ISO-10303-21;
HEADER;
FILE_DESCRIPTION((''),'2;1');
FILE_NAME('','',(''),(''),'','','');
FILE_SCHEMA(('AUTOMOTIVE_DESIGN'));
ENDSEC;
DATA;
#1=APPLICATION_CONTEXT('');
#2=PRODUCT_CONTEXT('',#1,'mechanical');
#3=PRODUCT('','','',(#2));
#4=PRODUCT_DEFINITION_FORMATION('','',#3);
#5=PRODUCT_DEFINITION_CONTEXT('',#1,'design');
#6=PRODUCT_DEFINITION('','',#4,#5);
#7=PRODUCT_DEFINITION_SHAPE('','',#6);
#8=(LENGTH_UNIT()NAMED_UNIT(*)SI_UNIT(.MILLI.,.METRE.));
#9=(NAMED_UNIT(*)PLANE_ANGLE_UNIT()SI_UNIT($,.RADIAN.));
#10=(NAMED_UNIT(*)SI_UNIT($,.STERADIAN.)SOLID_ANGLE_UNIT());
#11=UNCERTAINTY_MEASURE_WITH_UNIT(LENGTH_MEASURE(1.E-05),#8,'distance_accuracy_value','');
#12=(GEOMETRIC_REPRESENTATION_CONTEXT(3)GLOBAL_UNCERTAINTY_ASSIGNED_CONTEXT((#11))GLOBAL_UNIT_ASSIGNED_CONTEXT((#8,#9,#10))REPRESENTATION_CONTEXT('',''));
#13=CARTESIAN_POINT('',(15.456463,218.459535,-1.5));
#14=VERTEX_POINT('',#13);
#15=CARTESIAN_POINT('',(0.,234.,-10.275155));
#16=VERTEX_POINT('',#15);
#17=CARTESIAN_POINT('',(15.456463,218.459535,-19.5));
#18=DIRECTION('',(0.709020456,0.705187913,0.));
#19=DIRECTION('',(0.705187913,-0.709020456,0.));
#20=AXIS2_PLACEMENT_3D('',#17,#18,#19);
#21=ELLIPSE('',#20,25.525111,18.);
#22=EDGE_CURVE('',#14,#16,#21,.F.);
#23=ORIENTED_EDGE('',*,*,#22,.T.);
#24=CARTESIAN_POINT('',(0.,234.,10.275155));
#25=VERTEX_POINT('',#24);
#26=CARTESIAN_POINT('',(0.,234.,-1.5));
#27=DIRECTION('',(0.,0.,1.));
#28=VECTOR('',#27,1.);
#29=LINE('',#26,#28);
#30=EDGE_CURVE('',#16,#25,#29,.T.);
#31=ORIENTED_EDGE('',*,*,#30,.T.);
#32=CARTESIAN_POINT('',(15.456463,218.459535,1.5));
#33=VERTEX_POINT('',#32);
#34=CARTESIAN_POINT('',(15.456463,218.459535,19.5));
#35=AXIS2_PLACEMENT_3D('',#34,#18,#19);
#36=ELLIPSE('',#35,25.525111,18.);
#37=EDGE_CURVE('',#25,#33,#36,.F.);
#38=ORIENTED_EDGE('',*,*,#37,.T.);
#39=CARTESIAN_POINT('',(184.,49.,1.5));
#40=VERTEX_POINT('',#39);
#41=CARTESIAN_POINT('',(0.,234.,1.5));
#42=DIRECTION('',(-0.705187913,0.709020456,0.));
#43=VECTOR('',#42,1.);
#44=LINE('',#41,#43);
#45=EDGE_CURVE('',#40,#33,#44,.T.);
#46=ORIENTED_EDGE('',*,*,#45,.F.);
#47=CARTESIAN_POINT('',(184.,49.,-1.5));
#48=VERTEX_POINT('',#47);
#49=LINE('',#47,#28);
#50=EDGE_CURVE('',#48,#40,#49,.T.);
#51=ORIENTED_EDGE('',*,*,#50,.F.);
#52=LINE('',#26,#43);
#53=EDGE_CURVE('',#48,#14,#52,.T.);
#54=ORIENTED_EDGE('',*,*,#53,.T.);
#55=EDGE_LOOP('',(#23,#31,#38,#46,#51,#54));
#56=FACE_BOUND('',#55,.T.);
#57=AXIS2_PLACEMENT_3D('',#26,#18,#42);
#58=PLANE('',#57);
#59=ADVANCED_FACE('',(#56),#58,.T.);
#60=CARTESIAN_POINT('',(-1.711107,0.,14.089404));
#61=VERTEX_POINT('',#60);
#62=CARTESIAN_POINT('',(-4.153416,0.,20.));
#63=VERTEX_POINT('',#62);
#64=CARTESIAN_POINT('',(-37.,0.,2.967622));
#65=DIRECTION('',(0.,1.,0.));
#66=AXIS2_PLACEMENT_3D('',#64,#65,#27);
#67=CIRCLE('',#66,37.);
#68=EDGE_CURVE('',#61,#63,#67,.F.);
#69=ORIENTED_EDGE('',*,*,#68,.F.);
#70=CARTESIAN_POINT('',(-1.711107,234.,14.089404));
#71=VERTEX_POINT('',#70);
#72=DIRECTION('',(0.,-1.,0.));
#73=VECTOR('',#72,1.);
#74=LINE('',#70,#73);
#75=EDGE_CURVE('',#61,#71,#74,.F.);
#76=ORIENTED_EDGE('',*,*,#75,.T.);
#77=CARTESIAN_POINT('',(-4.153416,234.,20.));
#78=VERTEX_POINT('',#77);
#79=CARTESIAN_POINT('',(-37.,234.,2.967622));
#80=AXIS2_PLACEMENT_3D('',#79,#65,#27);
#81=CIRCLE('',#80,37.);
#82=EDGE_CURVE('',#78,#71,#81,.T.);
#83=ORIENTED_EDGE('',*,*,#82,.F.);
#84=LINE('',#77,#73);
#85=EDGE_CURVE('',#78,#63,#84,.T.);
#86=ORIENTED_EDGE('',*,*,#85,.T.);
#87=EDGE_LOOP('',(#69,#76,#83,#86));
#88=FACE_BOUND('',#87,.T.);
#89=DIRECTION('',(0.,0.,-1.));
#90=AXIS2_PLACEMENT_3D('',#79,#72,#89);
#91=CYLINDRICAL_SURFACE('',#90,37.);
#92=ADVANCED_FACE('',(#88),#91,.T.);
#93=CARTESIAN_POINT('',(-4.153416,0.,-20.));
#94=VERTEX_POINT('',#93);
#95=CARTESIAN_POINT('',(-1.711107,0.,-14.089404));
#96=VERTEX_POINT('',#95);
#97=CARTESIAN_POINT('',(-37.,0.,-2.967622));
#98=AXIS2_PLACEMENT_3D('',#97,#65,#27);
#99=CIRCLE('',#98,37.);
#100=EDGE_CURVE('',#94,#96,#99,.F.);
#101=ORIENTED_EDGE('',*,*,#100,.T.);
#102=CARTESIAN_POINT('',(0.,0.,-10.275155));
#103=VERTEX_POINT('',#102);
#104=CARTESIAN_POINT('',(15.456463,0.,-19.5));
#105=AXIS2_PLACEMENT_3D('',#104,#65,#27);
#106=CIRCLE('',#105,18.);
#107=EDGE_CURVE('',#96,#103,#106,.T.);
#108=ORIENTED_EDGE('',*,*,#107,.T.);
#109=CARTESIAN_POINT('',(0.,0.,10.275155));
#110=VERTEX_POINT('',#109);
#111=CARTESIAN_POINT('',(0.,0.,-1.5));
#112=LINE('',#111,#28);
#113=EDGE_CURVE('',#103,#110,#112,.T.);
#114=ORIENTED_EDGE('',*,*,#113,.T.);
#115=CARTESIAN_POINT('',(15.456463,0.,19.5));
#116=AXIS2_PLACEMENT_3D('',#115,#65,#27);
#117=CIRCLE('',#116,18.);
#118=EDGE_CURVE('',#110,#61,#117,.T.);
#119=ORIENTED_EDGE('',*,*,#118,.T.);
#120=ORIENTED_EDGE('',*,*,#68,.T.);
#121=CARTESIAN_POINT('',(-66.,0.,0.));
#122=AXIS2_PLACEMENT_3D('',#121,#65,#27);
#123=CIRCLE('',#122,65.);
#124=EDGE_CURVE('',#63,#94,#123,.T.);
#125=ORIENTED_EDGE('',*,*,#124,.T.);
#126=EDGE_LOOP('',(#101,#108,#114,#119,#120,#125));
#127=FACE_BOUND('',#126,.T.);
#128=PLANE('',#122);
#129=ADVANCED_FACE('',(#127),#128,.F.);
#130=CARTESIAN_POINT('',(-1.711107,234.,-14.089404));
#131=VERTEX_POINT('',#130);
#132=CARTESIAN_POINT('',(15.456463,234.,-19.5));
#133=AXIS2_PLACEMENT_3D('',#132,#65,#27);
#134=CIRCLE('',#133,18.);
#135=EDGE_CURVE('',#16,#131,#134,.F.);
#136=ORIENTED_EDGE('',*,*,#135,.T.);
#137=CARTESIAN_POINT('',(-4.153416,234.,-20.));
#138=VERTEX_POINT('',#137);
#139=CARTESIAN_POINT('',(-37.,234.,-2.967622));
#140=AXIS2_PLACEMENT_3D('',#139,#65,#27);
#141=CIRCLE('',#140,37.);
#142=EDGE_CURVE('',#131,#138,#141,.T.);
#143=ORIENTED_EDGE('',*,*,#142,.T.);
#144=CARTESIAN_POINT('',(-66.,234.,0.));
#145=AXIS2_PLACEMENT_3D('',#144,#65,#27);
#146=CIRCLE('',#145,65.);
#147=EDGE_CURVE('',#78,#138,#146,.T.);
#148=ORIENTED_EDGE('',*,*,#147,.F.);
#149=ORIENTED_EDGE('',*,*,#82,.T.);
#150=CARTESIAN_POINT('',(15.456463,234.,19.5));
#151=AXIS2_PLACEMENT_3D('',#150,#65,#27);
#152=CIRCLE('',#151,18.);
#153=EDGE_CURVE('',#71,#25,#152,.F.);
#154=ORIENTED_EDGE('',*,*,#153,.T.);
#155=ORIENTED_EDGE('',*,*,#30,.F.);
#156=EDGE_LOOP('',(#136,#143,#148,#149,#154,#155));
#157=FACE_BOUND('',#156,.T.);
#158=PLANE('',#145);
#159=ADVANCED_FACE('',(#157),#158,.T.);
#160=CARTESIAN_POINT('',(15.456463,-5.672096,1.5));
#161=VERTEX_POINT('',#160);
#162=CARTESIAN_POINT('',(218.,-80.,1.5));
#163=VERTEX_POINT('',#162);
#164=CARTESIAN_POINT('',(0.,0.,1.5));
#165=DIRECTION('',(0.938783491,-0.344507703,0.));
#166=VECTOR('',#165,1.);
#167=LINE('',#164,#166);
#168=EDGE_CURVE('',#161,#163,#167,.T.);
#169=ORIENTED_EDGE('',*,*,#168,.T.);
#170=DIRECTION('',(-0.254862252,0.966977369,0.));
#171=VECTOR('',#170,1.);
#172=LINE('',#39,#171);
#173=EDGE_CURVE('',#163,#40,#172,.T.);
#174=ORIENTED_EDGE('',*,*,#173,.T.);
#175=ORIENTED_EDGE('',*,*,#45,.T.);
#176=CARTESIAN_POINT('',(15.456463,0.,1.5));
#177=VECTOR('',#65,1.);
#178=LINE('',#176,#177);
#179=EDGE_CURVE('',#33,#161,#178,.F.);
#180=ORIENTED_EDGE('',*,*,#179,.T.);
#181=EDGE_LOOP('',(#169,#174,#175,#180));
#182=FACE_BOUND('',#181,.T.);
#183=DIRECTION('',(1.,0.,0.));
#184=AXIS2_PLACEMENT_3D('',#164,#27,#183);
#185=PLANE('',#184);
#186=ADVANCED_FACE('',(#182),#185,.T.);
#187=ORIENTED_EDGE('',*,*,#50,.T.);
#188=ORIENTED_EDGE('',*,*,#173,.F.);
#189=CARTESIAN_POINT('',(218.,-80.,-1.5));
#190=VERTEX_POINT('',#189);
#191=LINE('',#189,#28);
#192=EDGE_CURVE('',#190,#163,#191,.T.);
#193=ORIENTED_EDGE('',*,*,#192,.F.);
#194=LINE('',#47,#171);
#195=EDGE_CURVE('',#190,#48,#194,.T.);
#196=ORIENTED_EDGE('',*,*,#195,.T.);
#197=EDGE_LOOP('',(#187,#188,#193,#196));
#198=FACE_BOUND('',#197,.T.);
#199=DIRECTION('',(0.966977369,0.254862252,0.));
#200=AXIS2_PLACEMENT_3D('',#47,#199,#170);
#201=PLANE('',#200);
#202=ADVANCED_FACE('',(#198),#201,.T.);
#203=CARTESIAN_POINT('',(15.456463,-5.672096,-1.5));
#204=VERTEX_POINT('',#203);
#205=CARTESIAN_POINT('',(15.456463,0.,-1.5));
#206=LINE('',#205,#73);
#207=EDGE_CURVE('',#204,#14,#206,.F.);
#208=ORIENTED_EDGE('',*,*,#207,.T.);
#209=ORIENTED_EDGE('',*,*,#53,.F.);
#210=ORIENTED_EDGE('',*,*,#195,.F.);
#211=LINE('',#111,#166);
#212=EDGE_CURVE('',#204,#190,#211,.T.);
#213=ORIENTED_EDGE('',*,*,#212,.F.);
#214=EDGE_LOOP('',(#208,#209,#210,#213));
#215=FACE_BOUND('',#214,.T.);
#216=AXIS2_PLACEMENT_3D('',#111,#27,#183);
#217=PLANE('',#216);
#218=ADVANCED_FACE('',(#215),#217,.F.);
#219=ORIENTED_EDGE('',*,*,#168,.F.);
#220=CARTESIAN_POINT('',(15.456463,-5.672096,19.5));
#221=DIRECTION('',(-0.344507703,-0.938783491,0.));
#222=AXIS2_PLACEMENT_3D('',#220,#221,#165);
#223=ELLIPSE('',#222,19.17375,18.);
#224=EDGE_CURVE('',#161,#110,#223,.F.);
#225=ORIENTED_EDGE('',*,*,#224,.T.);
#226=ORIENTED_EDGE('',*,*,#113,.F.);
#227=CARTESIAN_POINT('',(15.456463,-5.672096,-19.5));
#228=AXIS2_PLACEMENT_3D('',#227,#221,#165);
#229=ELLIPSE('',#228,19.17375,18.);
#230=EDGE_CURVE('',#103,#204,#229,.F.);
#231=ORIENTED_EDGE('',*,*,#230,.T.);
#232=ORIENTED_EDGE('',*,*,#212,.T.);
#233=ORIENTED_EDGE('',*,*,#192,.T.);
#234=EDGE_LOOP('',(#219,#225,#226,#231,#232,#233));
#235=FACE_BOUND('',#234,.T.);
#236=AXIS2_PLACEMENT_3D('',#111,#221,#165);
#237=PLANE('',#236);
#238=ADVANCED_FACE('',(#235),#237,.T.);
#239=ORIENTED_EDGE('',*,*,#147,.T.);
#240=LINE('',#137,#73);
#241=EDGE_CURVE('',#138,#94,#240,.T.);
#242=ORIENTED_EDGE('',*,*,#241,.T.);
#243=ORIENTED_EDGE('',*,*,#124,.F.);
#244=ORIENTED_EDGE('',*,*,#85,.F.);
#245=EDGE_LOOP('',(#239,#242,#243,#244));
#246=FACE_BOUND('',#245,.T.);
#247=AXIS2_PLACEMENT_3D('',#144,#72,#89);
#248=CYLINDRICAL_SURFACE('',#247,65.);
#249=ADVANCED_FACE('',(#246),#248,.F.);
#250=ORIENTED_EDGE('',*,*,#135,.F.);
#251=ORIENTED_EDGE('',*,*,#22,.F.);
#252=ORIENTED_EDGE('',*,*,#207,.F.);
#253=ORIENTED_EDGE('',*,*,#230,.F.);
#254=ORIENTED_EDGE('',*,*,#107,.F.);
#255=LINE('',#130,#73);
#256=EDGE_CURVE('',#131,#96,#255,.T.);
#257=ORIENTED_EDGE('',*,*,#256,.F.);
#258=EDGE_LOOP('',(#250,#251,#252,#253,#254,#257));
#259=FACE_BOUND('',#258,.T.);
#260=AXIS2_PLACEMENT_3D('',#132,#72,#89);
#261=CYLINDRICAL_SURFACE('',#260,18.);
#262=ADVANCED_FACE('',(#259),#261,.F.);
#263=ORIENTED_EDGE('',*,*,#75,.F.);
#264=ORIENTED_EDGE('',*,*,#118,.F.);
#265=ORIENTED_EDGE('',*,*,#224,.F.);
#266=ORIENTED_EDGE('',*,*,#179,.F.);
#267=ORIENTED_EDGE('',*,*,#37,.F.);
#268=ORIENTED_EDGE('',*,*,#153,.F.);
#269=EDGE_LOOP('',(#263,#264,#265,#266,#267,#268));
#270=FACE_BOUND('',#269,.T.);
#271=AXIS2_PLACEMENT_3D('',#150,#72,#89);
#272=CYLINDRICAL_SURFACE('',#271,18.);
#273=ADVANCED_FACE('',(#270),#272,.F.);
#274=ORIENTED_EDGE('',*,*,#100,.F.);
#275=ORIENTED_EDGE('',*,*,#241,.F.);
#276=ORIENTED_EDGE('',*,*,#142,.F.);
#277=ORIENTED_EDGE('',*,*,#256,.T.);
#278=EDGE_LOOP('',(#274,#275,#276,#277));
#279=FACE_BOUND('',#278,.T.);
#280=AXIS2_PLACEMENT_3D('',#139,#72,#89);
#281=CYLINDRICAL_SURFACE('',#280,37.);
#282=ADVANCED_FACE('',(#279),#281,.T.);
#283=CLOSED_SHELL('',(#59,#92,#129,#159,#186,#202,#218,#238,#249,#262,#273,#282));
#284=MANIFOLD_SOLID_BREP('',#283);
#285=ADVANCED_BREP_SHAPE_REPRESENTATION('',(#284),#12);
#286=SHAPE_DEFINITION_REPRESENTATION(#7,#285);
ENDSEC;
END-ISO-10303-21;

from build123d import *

# Parameters (mm, degrees)
BOSS_EXTRUDE1_DEPTH      = 1.5
BOSS_EXTRUDE1_DEPTH_BACK = 1.5
BOSS_EXTRUDE2_DEPTH      = 234
FILLET1_R                = 37
FILLET2_R                = 37
FILLET3_R                = 18
FILLET4_R                = 18


with BuildPart() as part:
    # Sketch1 → Boss-Extrude1 (new, two sides: drawn at the far end of the back side and taken through both)
    with BuildSketch(Plane.XY.offset(-BOSS_EXTRUDE1_DEPTH_BACK)):
        Polygon((0, 0), (0, 234), (184, 49), (218, -80), align=None)
    extrude(amount=BOSS_EXTRUDE1_DEPTH + BOSS_EXTRUDE1_DEPTH_BACK)

    # Sketch3 → Boss-Extrude2 (add)
    with BuildSketch(Plane(origin=(0, 0, 0), x_dir=(1, 0, 0), z_dir=(0, 1, 0))):
        with BuildLine():
            Line((0, 0), (0, 20))
            Line((0, 20), (-4.153415616, 20))
            ThreePointArc((-4.153415616, 20), (-1, 0), (-4.153415616, -20))
            Line((-4.153415616, -20), (0, -20))
            Line((0, -20), (0, 0))
        make_face()
    extrude(amount=BOSS_EXTRUDE2_DEPTH)

    # Fillet1
    # the kernel refuses this fillet: 37 mm, written as the material it takes off along each edge
    with BuildSketch(Plane(origin=(0, -42.580944556, -20), x_dir=(-1, 0, 0), z_dir=(0, 1, 0))) as fillet1_piece_1:
        with BuildLine():
            CenterArc((37, 17.032377822), FILLET1_R, 180, 27.408696588)
            Line((0, 17.032377822), (-0.74, 17.032377822))
            Line((-0.74, 17.032377822), (-0.74, 0))
            Line((-0.74, 0), (0, -0.74))
            ThreePointArc((0, -0.74), (2.076707808, -0.74), (3.496483928, -0.340647556))
            Line((3.496483928, -0.340647556), (4.153415616, 0))
        make_face()
    extrude(amount=319.161889112, mode=Mode.SUBTRACT)

    # Fillet2
    # the kernel refuses this fillet: 37 mm, written as the material it takes off along each edge
    with BuildSketch(Plane(origin=(0, -42.580944556, 20), x_dir=(-1, 0, 0), z_dir=(0, 1, 0))) as fillet2_piece_1:
        with BuildLine():
            CenterArc((37, -17.032377822), FILLET2_R, 152.591303412, 27.408696588)
            Line((0, -17.032377822), (-0.74, -17.032377822))
            Line((-0.74, -17.032377822), (-0.74, 0))
            Line((-0.74, 0), (0, 0.74))
            ThreePointArc((0, 0.74), (2.076707808, 0.74), (3.496483928, 0.340647556))
            Line((3.496483928, 0.340647556), (4.153415616, 0))
        make_face()
    extrude(amount=319.161889112, mode=Mode.SUBTRACT)

    # Fillet3
    # the kernel refuses this fillet: 18 mm, written as the material it adds along each edge
    with BuildSketch(Plane(origin=(0, -38.641156858, 1.5), x_dir=(-0.13467815592130583, 0, 0.990889395602575), z_dir=(0, 1, 0))) as fillet3_piece_1_section:
        with BuildLine():
            CenterArc((15.754361222, 17.739851832), FILLET3_R, 187.740009623, 72.507035508)
            Line((-2.081647899, 15.315645026), (-3.865248811, 15.073224345))
            Line((-3.865248811, 15.073224345), (-1.783600912, -0.242420681))
            Line((-1.783600912, -0.242420681), (0.242420681, -1.783600912))
            ThreePointArc((0.242420681, -1.783600912), (1.696671933, -1.585944264), (12.40023467, -1.773985183))
            Line((12.40023467, -1.773985183), (12.705155265, 0))
        make_face()
    fillet3_piece_1 = extrude(amount=272.641156858, mode=Mode.PRIVATE)
    fillet3_piece_1 = fillet3_piece_1 - Plane(origin=(-66, -0.945349387, 0), x_dir=(0.9514859136040758, 0, -0.3076923076923073), z_dir=(0, -1, 0)) * Cylinder(65, 607, mode=Mode.PRIVATE)
    fillet3_piece_1 = split(fillet3_piece_1, bisect_by=Plane(origin=(6.079958866, -2.231177565, 3.815463773), z_dir=(0.34450770303612605, 0.9387834907734437, 0)), keep=Keep.TOP, mode=Mode.PRIVATE)
    fillet3_piece_1 = split(fillet3_piece_1, bisect_by=Plane(origin=(120.729104933, 112.614758628, 3.815463773), z_dir=(-0.7090204561204898, -0.7051879131144355, 0)), keep=Keep.TOP, mode=Mode.PRIVATE)
    add(fillet3_piece_1)
    with BuildSketch(Plane(origin=(0, 0, 1.5), x_dir=(-0.1346781559213058, 0, 0.990889395602575), z_dir=(0, 1, 0))) as fillet3_piece_2_section:
        with BuildLine():
            CenterArc((15.754361222, 17.739851832), FILLET3_R, 187.740009623, 72.507035508)
            Line((-2.081647899, 15.315645026), (-3.865248811, 15.073224345))
            Line((-3.865248811, 15.073224345), (-1.783600912, -0.242420681))
            Line((-1.783600912, -0.242420681), (0.242420681, -1.783600912))
            ThreePointArc((0.242420681, -1.783600912), (1.696671933, -1.585944264), (12.40023467, -1.773985183))
            Line((12.40023467, -1.773985183), (12.705155265, 0))
        make_face()
    fillet3_piece_2 = extrude(amount=272.641156858, mode=Mode.PRIVATE)
    fillet3_piece_2 = fillet3_piece_2 - Plane(origin=(-66, 0.313964565, 0), x_dir=(0.9514859136040758, 0, -0.3076923076923073), z_dir=(0, -1, 0)) * Cylinder(65, 607, mode=Mode.PRIVATE)
    fillet3_piece_2 = split(fillet3_piece_2, bisect_by=Plane(origin=(-0.982422038, 0.360521849, 12.117700452), z_dir=(-0.34450770303612605, -0.9387834907734437, 0)), keep=Keep.TOP, mode=Mode.PRIVATE)
    add(fillet3_piece_2)

    # Fillet4
    # the kernel refuses this fillet: 18 mm, written as the material it adds along each edge
    with BuildSketch(Plane(origin=(0, -38.641156858, -1.5), x_dir=(-0.1346781559213057, 0, -0.990889395602575), z_dir=(0, 1, 0))) as fillet4_piece_1_section:
        with BuildLine():
            CenterArc((15.754361222, -17.739851832), FILLET4_R, 99.752954869, 72.507035508)
            Line((-2.081647899, -15.315645026), (-3.865248811, -15.073224345))
            Line((-3.865248811, -15.073224345), (-1.783600912, 0.242420681))
            Line((-1.783600912, 0.242420681), (0.242420681, 1.783600912))
            ThreePointArc((0.242420681, 1.783600912), (1.696671933, 1.585944264), (12.40023467, 1.773985183))
            Line((12.40023467, 1.773985183), (12.705155265, 0))
        make_face()
    fillet4_piece_1 = extrude(amount=272.641156858, mode=Mode.PRIVATE)
    fillet4_piece_1 = fillet4_piece_1 - Plane(origin=(-66, -0.945349387, 0), x_dir=(0.9514859136040758, 0, -0.3076923076923073), z_dir=(0, -1, 0)) * Cylinder(65, 607, mode=Mode.PRIVATE)
    fillet4_piece_1 = split(fillet4_piece_1, bisect_by=Plane(origin=(120.729104933, 112.614758628, -3.815463773), z_dir=(-0.709020456120464, -0.7051879131144615, 0)), keep=Keep.TOP, mode=Mode.PRIVATE)
    fillet4_piece_1 = split(fillet4_piece_1, bisect_by=Plane(origin=(6.079958866, -2.231177565, -3.815463773), z_dir=(0.34450770303615846, 0.9387834907734318, 0)), keep=Keep.TOP, mode=Mode.PRIVATE)
    add(fillet4_piece_1)
    with BuildSketch(Plane(origin=(0, 0, -1.5), x_dir=(-0.13467815592130572, 0, -0.990889395602575), z_dir=(0, 1, 0))) as fillet4_piece_2_section:
        with BuildLine():
            CenterArc((15.754361222, -17.739851832), FILLET4_R, 99.752954869, 72.507035508)
            Line((-2.081647899, -15.315645026), (-3.865248811, -15.073224345))
            Line((-3.865248811, -15.073224345), (-1.783600912, 0.242420681))
            Line((-1.783600912, 0.242420681), (0.242420681, 1.783600912))
            ThreePointArc((0.242420681, 1.783600912), (1.696671933, 1.585944264), (12.40023467, 1.773985183))
            Line((12.40023467, 1.773985183), (12.705155265, 0))
        make_face()
    fillet4_piece_2 = extrude(amount=272.641156858, mode=Mode.PRIVATE)
    fillet4_piece_2 = fillet4_piece_2 - Plane(origin=(-66, 0.313964565, 0), x_dir=(0.9514859136040758, 0, -0.3076923076923073), z_dir=(0, -1, 0)) * Cylinder(65, 607, mode=Mode.PRIVATE)
    fillet4_piece_2 = split(fillet4_piece_2, bisect_by=Plane(origin=(-0.982422038, 0.360521849, -12.117700452), z_dir=(-0.34450770303615846, -0.9387834907734318, 0)), keep=Keep.TOP, mode=Mode.PRIVATE)
    add(fillet4_piece_2)


solid = part.part
